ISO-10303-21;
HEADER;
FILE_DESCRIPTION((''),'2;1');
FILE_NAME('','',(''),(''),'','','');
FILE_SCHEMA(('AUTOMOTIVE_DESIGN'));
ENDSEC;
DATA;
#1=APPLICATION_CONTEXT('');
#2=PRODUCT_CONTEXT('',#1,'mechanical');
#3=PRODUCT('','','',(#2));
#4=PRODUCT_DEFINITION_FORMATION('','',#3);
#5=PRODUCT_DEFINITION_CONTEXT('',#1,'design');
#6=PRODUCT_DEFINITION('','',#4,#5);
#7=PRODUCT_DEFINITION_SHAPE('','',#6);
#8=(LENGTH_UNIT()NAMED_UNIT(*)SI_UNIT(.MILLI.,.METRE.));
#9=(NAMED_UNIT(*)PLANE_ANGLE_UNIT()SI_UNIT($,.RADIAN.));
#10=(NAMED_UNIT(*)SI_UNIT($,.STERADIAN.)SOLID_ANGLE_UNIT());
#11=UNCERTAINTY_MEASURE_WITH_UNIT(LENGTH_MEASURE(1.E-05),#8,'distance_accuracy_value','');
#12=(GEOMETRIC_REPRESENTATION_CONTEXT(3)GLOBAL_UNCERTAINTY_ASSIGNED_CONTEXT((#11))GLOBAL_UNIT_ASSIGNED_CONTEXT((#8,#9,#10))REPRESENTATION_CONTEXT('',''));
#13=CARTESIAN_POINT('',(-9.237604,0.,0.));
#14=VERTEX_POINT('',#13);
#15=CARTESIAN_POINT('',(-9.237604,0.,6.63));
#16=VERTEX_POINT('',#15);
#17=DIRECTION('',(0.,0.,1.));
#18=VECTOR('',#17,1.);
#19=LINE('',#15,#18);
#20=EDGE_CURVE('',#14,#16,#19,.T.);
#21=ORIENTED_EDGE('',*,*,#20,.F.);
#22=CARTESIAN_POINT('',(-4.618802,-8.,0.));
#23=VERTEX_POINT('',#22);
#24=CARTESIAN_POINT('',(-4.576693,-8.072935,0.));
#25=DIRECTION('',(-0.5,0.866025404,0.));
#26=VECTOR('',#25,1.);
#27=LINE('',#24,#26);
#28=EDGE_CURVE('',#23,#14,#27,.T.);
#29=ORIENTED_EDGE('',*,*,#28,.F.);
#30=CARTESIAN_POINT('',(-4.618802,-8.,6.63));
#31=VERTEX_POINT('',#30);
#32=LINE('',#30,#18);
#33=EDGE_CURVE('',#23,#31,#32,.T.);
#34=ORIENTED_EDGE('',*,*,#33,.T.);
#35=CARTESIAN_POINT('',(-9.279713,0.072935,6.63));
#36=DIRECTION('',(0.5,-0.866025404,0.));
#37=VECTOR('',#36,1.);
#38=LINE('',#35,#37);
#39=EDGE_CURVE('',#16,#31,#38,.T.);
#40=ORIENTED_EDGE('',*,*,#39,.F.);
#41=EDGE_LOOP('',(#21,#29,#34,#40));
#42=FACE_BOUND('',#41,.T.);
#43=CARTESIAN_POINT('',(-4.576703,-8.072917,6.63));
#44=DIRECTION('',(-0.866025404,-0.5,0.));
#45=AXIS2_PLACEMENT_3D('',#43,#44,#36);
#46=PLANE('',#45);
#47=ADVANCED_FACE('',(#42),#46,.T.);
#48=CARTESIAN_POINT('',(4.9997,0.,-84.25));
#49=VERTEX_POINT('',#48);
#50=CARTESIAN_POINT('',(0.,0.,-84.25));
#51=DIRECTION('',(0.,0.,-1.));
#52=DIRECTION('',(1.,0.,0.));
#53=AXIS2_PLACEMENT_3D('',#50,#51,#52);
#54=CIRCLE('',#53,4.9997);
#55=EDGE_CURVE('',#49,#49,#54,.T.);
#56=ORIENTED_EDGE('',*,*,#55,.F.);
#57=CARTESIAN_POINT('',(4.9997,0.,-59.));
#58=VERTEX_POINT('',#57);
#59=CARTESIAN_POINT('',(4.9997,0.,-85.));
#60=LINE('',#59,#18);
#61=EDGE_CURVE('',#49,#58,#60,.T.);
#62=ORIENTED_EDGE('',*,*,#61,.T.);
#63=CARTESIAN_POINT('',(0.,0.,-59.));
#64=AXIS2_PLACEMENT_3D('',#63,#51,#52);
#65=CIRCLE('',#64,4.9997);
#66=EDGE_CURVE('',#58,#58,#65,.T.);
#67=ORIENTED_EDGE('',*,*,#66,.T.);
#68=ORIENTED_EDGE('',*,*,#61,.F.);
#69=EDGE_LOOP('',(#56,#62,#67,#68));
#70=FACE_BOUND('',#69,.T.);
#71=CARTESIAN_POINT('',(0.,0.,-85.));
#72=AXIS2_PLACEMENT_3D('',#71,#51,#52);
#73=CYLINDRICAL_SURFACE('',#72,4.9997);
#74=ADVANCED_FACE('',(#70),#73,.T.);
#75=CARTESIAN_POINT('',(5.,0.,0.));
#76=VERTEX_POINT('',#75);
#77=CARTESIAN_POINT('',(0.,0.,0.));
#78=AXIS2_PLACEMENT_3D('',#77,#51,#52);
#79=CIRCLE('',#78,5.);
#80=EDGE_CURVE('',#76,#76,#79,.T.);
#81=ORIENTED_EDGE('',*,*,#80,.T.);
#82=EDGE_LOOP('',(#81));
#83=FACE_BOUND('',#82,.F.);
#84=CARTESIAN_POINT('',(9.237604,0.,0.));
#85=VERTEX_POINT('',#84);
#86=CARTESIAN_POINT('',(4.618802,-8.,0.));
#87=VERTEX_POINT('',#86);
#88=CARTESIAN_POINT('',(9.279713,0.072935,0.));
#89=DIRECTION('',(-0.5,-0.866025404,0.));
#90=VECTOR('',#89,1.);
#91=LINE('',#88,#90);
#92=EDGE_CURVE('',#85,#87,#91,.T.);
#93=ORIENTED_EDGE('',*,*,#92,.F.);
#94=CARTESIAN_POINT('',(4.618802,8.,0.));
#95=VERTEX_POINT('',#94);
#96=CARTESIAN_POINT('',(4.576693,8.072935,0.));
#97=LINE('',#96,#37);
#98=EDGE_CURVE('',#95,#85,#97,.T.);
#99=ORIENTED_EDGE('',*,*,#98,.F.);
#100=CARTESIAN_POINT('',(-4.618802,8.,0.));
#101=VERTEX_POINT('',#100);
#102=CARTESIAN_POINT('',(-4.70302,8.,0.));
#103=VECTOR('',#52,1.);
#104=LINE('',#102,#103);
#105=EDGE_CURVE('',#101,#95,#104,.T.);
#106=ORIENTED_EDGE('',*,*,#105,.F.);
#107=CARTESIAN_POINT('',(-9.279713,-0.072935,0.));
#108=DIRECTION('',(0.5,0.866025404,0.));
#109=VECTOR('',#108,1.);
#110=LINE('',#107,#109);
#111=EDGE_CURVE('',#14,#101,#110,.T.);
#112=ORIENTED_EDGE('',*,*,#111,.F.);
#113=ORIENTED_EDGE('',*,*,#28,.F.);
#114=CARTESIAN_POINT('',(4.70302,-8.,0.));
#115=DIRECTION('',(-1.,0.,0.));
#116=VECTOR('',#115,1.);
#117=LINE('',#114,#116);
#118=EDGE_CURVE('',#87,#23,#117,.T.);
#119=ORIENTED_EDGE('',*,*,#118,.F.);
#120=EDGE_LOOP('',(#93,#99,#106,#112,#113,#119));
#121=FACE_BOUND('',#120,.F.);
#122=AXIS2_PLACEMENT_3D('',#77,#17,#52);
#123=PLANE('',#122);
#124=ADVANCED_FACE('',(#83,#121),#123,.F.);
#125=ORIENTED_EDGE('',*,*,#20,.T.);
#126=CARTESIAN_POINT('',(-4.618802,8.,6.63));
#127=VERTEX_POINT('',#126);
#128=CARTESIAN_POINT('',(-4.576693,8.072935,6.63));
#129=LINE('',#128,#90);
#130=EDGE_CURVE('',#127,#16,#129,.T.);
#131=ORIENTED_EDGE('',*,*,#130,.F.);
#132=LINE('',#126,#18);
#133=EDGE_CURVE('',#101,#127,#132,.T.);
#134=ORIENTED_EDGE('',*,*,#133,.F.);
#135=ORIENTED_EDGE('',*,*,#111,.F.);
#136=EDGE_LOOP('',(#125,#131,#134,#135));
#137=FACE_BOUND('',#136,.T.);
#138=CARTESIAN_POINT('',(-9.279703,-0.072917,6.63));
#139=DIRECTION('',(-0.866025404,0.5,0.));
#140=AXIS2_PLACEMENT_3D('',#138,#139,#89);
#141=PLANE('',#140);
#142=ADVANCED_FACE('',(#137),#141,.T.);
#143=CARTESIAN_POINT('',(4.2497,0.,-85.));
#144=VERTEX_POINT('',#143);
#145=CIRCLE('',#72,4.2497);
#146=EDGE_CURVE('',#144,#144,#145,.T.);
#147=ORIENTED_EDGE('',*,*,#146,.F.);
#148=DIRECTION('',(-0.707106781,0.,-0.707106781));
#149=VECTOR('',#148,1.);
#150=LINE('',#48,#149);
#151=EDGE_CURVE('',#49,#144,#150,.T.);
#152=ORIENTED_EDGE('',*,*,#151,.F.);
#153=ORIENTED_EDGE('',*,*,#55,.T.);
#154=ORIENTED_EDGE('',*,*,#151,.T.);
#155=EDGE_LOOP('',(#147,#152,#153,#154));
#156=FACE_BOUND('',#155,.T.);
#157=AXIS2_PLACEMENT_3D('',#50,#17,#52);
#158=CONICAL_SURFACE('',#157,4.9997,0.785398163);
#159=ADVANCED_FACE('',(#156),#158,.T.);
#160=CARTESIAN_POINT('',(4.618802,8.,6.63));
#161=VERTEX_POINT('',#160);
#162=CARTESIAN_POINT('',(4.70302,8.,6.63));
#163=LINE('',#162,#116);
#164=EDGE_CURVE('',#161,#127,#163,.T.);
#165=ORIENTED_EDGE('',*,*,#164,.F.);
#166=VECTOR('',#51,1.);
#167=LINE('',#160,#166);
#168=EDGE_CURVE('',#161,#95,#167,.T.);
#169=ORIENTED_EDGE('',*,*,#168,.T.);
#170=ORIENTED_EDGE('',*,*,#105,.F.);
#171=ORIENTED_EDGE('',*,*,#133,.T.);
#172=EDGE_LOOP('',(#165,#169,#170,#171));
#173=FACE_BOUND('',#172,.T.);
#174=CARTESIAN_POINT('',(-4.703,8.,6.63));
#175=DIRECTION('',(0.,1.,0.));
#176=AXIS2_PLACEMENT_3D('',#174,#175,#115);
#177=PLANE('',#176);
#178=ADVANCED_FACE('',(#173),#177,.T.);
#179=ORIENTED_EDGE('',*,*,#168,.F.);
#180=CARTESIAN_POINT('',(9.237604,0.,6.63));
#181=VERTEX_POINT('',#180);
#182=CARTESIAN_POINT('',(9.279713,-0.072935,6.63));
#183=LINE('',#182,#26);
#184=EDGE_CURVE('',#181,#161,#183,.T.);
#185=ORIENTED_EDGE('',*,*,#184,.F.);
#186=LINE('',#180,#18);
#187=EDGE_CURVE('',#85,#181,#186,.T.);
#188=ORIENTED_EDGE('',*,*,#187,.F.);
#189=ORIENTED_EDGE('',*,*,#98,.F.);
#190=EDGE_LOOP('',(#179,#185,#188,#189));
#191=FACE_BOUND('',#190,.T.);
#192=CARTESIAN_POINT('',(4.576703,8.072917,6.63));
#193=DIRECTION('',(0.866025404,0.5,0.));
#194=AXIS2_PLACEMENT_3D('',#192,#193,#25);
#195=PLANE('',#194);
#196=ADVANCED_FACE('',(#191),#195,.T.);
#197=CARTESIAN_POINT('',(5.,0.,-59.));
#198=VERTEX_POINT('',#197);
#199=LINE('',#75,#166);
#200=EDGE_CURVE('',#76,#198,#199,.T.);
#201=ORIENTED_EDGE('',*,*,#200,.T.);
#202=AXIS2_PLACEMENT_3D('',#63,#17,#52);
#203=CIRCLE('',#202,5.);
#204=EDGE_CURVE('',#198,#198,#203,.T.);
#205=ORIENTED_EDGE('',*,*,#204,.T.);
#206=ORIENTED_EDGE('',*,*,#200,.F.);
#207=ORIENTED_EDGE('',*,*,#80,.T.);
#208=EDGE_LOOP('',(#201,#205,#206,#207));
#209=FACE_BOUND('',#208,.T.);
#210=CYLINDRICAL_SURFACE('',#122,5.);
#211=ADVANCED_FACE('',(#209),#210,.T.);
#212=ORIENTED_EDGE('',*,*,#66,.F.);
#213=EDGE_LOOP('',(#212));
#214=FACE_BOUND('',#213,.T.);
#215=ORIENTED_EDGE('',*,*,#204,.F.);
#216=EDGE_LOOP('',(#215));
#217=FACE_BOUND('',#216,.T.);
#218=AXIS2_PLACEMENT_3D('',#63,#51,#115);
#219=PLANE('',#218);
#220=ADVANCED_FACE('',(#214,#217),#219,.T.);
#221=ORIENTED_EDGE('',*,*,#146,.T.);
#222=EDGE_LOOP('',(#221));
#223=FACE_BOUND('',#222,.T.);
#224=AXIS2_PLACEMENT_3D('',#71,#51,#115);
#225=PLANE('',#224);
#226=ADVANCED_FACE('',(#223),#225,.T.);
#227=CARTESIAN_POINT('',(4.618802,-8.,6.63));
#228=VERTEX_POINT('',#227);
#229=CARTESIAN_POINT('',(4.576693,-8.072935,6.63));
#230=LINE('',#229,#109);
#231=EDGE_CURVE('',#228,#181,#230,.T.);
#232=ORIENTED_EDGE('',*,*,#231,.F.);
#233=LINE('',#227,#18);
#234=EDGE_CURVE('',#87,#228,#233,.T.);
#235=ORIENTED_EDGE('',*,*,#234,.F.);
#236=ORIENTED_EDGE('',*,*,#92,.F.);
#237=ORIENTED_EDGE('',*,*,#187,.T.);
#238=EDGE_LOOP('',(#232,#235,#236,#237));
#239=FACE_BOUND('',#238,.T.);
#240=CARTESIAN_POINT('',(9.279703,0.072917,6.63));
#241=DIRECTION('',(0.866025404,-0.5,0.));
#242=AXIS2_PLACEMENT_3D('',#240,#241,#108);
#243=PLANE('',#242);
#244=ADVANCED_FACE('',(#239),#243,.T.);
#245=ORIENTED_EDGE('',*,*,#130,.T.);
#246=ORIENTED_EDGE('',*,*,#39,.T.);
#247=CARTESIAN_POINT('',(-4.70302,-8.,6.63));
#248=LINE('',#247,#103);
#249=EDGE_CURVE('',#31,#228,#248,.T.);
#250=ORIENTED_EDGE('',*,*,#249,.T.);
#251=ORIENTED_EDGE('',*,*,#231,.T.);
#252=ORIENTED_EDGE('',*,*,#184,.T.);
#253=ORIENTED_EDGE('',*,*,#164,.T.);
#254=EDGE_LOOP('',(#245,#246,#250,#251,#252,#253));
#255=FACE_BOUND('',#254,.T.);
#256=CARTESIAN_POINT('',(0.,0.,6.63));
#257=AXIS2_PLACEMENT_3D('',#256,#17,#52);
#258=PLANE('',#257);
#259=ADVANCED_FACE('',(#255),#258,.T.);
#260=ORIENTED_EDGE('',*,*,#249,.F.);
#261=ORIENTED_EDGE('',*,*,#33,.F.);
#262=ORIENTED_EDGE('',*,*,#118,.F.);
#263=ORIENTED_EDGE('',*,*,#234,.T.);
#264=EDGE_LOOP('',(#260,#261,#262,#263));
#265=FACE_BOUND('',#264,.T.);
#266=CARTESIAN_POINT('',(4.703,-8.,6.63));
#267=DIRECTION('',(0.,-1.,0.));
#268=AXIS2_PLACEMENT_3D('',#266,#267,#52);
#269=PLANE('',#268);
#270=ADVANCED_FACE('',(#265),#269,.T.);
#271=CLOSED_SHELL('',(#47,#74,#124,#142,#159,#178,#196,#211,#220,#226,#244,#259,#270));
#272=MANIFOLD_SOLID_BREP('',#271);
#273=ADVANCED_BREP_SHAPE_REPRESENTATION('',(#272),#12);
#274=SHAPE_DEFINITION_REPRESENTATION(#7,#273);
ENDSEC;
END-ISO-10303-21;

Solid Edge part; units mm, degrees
sketch "Sketch1" plane through (0, 0, 0) normal (0, 0, 1) x (1, 0, 0)
  circle A0 centre (0, 0) radius 9.28
  dimension "D1" = 18.56
extrude "Protrusion1" add sketch "Sketch1" along normal blind 6.63
sketch "Sketch2" plane through (0, 0, 0) normal (0, 0, -1) x (1, 0, 0)
  circle A0 centre (0, 0) radius 5
extrude "Protrusion2" add sketch "Sketch2" along normal blind 85
sketch "Sketch3" plane through (0, 0, -85) normal (0, 0, -1) x (1, 0, 0)
  circle A0 centre (0, 0) radius 4.9997
extrude "Cutout1" cut sketch "Sketch3" against normal blind 26 flip side to cut
chamfer "Chamfer_1" distance 0.75 angle 45 1 edges at (-4.9997, 0, -85)
sketch "Sketch4" plane through (0, 0, 6.63) normal (0, 0, 1) x (1, 0, 0)
  line L0 (-4.703, 8) -> (4.703, 8)
  dimension "D1" = 16
extrude "Cutout2" cut sketch "Sketch4" against normal up to next material side at (0, 8.05, 6.63)
pattern_circular "Pattern1" count 6 over 360 about axis through (0, 0, 6.63) along (0, 0, 1) of "Cutout2"
properties part number "200074"
